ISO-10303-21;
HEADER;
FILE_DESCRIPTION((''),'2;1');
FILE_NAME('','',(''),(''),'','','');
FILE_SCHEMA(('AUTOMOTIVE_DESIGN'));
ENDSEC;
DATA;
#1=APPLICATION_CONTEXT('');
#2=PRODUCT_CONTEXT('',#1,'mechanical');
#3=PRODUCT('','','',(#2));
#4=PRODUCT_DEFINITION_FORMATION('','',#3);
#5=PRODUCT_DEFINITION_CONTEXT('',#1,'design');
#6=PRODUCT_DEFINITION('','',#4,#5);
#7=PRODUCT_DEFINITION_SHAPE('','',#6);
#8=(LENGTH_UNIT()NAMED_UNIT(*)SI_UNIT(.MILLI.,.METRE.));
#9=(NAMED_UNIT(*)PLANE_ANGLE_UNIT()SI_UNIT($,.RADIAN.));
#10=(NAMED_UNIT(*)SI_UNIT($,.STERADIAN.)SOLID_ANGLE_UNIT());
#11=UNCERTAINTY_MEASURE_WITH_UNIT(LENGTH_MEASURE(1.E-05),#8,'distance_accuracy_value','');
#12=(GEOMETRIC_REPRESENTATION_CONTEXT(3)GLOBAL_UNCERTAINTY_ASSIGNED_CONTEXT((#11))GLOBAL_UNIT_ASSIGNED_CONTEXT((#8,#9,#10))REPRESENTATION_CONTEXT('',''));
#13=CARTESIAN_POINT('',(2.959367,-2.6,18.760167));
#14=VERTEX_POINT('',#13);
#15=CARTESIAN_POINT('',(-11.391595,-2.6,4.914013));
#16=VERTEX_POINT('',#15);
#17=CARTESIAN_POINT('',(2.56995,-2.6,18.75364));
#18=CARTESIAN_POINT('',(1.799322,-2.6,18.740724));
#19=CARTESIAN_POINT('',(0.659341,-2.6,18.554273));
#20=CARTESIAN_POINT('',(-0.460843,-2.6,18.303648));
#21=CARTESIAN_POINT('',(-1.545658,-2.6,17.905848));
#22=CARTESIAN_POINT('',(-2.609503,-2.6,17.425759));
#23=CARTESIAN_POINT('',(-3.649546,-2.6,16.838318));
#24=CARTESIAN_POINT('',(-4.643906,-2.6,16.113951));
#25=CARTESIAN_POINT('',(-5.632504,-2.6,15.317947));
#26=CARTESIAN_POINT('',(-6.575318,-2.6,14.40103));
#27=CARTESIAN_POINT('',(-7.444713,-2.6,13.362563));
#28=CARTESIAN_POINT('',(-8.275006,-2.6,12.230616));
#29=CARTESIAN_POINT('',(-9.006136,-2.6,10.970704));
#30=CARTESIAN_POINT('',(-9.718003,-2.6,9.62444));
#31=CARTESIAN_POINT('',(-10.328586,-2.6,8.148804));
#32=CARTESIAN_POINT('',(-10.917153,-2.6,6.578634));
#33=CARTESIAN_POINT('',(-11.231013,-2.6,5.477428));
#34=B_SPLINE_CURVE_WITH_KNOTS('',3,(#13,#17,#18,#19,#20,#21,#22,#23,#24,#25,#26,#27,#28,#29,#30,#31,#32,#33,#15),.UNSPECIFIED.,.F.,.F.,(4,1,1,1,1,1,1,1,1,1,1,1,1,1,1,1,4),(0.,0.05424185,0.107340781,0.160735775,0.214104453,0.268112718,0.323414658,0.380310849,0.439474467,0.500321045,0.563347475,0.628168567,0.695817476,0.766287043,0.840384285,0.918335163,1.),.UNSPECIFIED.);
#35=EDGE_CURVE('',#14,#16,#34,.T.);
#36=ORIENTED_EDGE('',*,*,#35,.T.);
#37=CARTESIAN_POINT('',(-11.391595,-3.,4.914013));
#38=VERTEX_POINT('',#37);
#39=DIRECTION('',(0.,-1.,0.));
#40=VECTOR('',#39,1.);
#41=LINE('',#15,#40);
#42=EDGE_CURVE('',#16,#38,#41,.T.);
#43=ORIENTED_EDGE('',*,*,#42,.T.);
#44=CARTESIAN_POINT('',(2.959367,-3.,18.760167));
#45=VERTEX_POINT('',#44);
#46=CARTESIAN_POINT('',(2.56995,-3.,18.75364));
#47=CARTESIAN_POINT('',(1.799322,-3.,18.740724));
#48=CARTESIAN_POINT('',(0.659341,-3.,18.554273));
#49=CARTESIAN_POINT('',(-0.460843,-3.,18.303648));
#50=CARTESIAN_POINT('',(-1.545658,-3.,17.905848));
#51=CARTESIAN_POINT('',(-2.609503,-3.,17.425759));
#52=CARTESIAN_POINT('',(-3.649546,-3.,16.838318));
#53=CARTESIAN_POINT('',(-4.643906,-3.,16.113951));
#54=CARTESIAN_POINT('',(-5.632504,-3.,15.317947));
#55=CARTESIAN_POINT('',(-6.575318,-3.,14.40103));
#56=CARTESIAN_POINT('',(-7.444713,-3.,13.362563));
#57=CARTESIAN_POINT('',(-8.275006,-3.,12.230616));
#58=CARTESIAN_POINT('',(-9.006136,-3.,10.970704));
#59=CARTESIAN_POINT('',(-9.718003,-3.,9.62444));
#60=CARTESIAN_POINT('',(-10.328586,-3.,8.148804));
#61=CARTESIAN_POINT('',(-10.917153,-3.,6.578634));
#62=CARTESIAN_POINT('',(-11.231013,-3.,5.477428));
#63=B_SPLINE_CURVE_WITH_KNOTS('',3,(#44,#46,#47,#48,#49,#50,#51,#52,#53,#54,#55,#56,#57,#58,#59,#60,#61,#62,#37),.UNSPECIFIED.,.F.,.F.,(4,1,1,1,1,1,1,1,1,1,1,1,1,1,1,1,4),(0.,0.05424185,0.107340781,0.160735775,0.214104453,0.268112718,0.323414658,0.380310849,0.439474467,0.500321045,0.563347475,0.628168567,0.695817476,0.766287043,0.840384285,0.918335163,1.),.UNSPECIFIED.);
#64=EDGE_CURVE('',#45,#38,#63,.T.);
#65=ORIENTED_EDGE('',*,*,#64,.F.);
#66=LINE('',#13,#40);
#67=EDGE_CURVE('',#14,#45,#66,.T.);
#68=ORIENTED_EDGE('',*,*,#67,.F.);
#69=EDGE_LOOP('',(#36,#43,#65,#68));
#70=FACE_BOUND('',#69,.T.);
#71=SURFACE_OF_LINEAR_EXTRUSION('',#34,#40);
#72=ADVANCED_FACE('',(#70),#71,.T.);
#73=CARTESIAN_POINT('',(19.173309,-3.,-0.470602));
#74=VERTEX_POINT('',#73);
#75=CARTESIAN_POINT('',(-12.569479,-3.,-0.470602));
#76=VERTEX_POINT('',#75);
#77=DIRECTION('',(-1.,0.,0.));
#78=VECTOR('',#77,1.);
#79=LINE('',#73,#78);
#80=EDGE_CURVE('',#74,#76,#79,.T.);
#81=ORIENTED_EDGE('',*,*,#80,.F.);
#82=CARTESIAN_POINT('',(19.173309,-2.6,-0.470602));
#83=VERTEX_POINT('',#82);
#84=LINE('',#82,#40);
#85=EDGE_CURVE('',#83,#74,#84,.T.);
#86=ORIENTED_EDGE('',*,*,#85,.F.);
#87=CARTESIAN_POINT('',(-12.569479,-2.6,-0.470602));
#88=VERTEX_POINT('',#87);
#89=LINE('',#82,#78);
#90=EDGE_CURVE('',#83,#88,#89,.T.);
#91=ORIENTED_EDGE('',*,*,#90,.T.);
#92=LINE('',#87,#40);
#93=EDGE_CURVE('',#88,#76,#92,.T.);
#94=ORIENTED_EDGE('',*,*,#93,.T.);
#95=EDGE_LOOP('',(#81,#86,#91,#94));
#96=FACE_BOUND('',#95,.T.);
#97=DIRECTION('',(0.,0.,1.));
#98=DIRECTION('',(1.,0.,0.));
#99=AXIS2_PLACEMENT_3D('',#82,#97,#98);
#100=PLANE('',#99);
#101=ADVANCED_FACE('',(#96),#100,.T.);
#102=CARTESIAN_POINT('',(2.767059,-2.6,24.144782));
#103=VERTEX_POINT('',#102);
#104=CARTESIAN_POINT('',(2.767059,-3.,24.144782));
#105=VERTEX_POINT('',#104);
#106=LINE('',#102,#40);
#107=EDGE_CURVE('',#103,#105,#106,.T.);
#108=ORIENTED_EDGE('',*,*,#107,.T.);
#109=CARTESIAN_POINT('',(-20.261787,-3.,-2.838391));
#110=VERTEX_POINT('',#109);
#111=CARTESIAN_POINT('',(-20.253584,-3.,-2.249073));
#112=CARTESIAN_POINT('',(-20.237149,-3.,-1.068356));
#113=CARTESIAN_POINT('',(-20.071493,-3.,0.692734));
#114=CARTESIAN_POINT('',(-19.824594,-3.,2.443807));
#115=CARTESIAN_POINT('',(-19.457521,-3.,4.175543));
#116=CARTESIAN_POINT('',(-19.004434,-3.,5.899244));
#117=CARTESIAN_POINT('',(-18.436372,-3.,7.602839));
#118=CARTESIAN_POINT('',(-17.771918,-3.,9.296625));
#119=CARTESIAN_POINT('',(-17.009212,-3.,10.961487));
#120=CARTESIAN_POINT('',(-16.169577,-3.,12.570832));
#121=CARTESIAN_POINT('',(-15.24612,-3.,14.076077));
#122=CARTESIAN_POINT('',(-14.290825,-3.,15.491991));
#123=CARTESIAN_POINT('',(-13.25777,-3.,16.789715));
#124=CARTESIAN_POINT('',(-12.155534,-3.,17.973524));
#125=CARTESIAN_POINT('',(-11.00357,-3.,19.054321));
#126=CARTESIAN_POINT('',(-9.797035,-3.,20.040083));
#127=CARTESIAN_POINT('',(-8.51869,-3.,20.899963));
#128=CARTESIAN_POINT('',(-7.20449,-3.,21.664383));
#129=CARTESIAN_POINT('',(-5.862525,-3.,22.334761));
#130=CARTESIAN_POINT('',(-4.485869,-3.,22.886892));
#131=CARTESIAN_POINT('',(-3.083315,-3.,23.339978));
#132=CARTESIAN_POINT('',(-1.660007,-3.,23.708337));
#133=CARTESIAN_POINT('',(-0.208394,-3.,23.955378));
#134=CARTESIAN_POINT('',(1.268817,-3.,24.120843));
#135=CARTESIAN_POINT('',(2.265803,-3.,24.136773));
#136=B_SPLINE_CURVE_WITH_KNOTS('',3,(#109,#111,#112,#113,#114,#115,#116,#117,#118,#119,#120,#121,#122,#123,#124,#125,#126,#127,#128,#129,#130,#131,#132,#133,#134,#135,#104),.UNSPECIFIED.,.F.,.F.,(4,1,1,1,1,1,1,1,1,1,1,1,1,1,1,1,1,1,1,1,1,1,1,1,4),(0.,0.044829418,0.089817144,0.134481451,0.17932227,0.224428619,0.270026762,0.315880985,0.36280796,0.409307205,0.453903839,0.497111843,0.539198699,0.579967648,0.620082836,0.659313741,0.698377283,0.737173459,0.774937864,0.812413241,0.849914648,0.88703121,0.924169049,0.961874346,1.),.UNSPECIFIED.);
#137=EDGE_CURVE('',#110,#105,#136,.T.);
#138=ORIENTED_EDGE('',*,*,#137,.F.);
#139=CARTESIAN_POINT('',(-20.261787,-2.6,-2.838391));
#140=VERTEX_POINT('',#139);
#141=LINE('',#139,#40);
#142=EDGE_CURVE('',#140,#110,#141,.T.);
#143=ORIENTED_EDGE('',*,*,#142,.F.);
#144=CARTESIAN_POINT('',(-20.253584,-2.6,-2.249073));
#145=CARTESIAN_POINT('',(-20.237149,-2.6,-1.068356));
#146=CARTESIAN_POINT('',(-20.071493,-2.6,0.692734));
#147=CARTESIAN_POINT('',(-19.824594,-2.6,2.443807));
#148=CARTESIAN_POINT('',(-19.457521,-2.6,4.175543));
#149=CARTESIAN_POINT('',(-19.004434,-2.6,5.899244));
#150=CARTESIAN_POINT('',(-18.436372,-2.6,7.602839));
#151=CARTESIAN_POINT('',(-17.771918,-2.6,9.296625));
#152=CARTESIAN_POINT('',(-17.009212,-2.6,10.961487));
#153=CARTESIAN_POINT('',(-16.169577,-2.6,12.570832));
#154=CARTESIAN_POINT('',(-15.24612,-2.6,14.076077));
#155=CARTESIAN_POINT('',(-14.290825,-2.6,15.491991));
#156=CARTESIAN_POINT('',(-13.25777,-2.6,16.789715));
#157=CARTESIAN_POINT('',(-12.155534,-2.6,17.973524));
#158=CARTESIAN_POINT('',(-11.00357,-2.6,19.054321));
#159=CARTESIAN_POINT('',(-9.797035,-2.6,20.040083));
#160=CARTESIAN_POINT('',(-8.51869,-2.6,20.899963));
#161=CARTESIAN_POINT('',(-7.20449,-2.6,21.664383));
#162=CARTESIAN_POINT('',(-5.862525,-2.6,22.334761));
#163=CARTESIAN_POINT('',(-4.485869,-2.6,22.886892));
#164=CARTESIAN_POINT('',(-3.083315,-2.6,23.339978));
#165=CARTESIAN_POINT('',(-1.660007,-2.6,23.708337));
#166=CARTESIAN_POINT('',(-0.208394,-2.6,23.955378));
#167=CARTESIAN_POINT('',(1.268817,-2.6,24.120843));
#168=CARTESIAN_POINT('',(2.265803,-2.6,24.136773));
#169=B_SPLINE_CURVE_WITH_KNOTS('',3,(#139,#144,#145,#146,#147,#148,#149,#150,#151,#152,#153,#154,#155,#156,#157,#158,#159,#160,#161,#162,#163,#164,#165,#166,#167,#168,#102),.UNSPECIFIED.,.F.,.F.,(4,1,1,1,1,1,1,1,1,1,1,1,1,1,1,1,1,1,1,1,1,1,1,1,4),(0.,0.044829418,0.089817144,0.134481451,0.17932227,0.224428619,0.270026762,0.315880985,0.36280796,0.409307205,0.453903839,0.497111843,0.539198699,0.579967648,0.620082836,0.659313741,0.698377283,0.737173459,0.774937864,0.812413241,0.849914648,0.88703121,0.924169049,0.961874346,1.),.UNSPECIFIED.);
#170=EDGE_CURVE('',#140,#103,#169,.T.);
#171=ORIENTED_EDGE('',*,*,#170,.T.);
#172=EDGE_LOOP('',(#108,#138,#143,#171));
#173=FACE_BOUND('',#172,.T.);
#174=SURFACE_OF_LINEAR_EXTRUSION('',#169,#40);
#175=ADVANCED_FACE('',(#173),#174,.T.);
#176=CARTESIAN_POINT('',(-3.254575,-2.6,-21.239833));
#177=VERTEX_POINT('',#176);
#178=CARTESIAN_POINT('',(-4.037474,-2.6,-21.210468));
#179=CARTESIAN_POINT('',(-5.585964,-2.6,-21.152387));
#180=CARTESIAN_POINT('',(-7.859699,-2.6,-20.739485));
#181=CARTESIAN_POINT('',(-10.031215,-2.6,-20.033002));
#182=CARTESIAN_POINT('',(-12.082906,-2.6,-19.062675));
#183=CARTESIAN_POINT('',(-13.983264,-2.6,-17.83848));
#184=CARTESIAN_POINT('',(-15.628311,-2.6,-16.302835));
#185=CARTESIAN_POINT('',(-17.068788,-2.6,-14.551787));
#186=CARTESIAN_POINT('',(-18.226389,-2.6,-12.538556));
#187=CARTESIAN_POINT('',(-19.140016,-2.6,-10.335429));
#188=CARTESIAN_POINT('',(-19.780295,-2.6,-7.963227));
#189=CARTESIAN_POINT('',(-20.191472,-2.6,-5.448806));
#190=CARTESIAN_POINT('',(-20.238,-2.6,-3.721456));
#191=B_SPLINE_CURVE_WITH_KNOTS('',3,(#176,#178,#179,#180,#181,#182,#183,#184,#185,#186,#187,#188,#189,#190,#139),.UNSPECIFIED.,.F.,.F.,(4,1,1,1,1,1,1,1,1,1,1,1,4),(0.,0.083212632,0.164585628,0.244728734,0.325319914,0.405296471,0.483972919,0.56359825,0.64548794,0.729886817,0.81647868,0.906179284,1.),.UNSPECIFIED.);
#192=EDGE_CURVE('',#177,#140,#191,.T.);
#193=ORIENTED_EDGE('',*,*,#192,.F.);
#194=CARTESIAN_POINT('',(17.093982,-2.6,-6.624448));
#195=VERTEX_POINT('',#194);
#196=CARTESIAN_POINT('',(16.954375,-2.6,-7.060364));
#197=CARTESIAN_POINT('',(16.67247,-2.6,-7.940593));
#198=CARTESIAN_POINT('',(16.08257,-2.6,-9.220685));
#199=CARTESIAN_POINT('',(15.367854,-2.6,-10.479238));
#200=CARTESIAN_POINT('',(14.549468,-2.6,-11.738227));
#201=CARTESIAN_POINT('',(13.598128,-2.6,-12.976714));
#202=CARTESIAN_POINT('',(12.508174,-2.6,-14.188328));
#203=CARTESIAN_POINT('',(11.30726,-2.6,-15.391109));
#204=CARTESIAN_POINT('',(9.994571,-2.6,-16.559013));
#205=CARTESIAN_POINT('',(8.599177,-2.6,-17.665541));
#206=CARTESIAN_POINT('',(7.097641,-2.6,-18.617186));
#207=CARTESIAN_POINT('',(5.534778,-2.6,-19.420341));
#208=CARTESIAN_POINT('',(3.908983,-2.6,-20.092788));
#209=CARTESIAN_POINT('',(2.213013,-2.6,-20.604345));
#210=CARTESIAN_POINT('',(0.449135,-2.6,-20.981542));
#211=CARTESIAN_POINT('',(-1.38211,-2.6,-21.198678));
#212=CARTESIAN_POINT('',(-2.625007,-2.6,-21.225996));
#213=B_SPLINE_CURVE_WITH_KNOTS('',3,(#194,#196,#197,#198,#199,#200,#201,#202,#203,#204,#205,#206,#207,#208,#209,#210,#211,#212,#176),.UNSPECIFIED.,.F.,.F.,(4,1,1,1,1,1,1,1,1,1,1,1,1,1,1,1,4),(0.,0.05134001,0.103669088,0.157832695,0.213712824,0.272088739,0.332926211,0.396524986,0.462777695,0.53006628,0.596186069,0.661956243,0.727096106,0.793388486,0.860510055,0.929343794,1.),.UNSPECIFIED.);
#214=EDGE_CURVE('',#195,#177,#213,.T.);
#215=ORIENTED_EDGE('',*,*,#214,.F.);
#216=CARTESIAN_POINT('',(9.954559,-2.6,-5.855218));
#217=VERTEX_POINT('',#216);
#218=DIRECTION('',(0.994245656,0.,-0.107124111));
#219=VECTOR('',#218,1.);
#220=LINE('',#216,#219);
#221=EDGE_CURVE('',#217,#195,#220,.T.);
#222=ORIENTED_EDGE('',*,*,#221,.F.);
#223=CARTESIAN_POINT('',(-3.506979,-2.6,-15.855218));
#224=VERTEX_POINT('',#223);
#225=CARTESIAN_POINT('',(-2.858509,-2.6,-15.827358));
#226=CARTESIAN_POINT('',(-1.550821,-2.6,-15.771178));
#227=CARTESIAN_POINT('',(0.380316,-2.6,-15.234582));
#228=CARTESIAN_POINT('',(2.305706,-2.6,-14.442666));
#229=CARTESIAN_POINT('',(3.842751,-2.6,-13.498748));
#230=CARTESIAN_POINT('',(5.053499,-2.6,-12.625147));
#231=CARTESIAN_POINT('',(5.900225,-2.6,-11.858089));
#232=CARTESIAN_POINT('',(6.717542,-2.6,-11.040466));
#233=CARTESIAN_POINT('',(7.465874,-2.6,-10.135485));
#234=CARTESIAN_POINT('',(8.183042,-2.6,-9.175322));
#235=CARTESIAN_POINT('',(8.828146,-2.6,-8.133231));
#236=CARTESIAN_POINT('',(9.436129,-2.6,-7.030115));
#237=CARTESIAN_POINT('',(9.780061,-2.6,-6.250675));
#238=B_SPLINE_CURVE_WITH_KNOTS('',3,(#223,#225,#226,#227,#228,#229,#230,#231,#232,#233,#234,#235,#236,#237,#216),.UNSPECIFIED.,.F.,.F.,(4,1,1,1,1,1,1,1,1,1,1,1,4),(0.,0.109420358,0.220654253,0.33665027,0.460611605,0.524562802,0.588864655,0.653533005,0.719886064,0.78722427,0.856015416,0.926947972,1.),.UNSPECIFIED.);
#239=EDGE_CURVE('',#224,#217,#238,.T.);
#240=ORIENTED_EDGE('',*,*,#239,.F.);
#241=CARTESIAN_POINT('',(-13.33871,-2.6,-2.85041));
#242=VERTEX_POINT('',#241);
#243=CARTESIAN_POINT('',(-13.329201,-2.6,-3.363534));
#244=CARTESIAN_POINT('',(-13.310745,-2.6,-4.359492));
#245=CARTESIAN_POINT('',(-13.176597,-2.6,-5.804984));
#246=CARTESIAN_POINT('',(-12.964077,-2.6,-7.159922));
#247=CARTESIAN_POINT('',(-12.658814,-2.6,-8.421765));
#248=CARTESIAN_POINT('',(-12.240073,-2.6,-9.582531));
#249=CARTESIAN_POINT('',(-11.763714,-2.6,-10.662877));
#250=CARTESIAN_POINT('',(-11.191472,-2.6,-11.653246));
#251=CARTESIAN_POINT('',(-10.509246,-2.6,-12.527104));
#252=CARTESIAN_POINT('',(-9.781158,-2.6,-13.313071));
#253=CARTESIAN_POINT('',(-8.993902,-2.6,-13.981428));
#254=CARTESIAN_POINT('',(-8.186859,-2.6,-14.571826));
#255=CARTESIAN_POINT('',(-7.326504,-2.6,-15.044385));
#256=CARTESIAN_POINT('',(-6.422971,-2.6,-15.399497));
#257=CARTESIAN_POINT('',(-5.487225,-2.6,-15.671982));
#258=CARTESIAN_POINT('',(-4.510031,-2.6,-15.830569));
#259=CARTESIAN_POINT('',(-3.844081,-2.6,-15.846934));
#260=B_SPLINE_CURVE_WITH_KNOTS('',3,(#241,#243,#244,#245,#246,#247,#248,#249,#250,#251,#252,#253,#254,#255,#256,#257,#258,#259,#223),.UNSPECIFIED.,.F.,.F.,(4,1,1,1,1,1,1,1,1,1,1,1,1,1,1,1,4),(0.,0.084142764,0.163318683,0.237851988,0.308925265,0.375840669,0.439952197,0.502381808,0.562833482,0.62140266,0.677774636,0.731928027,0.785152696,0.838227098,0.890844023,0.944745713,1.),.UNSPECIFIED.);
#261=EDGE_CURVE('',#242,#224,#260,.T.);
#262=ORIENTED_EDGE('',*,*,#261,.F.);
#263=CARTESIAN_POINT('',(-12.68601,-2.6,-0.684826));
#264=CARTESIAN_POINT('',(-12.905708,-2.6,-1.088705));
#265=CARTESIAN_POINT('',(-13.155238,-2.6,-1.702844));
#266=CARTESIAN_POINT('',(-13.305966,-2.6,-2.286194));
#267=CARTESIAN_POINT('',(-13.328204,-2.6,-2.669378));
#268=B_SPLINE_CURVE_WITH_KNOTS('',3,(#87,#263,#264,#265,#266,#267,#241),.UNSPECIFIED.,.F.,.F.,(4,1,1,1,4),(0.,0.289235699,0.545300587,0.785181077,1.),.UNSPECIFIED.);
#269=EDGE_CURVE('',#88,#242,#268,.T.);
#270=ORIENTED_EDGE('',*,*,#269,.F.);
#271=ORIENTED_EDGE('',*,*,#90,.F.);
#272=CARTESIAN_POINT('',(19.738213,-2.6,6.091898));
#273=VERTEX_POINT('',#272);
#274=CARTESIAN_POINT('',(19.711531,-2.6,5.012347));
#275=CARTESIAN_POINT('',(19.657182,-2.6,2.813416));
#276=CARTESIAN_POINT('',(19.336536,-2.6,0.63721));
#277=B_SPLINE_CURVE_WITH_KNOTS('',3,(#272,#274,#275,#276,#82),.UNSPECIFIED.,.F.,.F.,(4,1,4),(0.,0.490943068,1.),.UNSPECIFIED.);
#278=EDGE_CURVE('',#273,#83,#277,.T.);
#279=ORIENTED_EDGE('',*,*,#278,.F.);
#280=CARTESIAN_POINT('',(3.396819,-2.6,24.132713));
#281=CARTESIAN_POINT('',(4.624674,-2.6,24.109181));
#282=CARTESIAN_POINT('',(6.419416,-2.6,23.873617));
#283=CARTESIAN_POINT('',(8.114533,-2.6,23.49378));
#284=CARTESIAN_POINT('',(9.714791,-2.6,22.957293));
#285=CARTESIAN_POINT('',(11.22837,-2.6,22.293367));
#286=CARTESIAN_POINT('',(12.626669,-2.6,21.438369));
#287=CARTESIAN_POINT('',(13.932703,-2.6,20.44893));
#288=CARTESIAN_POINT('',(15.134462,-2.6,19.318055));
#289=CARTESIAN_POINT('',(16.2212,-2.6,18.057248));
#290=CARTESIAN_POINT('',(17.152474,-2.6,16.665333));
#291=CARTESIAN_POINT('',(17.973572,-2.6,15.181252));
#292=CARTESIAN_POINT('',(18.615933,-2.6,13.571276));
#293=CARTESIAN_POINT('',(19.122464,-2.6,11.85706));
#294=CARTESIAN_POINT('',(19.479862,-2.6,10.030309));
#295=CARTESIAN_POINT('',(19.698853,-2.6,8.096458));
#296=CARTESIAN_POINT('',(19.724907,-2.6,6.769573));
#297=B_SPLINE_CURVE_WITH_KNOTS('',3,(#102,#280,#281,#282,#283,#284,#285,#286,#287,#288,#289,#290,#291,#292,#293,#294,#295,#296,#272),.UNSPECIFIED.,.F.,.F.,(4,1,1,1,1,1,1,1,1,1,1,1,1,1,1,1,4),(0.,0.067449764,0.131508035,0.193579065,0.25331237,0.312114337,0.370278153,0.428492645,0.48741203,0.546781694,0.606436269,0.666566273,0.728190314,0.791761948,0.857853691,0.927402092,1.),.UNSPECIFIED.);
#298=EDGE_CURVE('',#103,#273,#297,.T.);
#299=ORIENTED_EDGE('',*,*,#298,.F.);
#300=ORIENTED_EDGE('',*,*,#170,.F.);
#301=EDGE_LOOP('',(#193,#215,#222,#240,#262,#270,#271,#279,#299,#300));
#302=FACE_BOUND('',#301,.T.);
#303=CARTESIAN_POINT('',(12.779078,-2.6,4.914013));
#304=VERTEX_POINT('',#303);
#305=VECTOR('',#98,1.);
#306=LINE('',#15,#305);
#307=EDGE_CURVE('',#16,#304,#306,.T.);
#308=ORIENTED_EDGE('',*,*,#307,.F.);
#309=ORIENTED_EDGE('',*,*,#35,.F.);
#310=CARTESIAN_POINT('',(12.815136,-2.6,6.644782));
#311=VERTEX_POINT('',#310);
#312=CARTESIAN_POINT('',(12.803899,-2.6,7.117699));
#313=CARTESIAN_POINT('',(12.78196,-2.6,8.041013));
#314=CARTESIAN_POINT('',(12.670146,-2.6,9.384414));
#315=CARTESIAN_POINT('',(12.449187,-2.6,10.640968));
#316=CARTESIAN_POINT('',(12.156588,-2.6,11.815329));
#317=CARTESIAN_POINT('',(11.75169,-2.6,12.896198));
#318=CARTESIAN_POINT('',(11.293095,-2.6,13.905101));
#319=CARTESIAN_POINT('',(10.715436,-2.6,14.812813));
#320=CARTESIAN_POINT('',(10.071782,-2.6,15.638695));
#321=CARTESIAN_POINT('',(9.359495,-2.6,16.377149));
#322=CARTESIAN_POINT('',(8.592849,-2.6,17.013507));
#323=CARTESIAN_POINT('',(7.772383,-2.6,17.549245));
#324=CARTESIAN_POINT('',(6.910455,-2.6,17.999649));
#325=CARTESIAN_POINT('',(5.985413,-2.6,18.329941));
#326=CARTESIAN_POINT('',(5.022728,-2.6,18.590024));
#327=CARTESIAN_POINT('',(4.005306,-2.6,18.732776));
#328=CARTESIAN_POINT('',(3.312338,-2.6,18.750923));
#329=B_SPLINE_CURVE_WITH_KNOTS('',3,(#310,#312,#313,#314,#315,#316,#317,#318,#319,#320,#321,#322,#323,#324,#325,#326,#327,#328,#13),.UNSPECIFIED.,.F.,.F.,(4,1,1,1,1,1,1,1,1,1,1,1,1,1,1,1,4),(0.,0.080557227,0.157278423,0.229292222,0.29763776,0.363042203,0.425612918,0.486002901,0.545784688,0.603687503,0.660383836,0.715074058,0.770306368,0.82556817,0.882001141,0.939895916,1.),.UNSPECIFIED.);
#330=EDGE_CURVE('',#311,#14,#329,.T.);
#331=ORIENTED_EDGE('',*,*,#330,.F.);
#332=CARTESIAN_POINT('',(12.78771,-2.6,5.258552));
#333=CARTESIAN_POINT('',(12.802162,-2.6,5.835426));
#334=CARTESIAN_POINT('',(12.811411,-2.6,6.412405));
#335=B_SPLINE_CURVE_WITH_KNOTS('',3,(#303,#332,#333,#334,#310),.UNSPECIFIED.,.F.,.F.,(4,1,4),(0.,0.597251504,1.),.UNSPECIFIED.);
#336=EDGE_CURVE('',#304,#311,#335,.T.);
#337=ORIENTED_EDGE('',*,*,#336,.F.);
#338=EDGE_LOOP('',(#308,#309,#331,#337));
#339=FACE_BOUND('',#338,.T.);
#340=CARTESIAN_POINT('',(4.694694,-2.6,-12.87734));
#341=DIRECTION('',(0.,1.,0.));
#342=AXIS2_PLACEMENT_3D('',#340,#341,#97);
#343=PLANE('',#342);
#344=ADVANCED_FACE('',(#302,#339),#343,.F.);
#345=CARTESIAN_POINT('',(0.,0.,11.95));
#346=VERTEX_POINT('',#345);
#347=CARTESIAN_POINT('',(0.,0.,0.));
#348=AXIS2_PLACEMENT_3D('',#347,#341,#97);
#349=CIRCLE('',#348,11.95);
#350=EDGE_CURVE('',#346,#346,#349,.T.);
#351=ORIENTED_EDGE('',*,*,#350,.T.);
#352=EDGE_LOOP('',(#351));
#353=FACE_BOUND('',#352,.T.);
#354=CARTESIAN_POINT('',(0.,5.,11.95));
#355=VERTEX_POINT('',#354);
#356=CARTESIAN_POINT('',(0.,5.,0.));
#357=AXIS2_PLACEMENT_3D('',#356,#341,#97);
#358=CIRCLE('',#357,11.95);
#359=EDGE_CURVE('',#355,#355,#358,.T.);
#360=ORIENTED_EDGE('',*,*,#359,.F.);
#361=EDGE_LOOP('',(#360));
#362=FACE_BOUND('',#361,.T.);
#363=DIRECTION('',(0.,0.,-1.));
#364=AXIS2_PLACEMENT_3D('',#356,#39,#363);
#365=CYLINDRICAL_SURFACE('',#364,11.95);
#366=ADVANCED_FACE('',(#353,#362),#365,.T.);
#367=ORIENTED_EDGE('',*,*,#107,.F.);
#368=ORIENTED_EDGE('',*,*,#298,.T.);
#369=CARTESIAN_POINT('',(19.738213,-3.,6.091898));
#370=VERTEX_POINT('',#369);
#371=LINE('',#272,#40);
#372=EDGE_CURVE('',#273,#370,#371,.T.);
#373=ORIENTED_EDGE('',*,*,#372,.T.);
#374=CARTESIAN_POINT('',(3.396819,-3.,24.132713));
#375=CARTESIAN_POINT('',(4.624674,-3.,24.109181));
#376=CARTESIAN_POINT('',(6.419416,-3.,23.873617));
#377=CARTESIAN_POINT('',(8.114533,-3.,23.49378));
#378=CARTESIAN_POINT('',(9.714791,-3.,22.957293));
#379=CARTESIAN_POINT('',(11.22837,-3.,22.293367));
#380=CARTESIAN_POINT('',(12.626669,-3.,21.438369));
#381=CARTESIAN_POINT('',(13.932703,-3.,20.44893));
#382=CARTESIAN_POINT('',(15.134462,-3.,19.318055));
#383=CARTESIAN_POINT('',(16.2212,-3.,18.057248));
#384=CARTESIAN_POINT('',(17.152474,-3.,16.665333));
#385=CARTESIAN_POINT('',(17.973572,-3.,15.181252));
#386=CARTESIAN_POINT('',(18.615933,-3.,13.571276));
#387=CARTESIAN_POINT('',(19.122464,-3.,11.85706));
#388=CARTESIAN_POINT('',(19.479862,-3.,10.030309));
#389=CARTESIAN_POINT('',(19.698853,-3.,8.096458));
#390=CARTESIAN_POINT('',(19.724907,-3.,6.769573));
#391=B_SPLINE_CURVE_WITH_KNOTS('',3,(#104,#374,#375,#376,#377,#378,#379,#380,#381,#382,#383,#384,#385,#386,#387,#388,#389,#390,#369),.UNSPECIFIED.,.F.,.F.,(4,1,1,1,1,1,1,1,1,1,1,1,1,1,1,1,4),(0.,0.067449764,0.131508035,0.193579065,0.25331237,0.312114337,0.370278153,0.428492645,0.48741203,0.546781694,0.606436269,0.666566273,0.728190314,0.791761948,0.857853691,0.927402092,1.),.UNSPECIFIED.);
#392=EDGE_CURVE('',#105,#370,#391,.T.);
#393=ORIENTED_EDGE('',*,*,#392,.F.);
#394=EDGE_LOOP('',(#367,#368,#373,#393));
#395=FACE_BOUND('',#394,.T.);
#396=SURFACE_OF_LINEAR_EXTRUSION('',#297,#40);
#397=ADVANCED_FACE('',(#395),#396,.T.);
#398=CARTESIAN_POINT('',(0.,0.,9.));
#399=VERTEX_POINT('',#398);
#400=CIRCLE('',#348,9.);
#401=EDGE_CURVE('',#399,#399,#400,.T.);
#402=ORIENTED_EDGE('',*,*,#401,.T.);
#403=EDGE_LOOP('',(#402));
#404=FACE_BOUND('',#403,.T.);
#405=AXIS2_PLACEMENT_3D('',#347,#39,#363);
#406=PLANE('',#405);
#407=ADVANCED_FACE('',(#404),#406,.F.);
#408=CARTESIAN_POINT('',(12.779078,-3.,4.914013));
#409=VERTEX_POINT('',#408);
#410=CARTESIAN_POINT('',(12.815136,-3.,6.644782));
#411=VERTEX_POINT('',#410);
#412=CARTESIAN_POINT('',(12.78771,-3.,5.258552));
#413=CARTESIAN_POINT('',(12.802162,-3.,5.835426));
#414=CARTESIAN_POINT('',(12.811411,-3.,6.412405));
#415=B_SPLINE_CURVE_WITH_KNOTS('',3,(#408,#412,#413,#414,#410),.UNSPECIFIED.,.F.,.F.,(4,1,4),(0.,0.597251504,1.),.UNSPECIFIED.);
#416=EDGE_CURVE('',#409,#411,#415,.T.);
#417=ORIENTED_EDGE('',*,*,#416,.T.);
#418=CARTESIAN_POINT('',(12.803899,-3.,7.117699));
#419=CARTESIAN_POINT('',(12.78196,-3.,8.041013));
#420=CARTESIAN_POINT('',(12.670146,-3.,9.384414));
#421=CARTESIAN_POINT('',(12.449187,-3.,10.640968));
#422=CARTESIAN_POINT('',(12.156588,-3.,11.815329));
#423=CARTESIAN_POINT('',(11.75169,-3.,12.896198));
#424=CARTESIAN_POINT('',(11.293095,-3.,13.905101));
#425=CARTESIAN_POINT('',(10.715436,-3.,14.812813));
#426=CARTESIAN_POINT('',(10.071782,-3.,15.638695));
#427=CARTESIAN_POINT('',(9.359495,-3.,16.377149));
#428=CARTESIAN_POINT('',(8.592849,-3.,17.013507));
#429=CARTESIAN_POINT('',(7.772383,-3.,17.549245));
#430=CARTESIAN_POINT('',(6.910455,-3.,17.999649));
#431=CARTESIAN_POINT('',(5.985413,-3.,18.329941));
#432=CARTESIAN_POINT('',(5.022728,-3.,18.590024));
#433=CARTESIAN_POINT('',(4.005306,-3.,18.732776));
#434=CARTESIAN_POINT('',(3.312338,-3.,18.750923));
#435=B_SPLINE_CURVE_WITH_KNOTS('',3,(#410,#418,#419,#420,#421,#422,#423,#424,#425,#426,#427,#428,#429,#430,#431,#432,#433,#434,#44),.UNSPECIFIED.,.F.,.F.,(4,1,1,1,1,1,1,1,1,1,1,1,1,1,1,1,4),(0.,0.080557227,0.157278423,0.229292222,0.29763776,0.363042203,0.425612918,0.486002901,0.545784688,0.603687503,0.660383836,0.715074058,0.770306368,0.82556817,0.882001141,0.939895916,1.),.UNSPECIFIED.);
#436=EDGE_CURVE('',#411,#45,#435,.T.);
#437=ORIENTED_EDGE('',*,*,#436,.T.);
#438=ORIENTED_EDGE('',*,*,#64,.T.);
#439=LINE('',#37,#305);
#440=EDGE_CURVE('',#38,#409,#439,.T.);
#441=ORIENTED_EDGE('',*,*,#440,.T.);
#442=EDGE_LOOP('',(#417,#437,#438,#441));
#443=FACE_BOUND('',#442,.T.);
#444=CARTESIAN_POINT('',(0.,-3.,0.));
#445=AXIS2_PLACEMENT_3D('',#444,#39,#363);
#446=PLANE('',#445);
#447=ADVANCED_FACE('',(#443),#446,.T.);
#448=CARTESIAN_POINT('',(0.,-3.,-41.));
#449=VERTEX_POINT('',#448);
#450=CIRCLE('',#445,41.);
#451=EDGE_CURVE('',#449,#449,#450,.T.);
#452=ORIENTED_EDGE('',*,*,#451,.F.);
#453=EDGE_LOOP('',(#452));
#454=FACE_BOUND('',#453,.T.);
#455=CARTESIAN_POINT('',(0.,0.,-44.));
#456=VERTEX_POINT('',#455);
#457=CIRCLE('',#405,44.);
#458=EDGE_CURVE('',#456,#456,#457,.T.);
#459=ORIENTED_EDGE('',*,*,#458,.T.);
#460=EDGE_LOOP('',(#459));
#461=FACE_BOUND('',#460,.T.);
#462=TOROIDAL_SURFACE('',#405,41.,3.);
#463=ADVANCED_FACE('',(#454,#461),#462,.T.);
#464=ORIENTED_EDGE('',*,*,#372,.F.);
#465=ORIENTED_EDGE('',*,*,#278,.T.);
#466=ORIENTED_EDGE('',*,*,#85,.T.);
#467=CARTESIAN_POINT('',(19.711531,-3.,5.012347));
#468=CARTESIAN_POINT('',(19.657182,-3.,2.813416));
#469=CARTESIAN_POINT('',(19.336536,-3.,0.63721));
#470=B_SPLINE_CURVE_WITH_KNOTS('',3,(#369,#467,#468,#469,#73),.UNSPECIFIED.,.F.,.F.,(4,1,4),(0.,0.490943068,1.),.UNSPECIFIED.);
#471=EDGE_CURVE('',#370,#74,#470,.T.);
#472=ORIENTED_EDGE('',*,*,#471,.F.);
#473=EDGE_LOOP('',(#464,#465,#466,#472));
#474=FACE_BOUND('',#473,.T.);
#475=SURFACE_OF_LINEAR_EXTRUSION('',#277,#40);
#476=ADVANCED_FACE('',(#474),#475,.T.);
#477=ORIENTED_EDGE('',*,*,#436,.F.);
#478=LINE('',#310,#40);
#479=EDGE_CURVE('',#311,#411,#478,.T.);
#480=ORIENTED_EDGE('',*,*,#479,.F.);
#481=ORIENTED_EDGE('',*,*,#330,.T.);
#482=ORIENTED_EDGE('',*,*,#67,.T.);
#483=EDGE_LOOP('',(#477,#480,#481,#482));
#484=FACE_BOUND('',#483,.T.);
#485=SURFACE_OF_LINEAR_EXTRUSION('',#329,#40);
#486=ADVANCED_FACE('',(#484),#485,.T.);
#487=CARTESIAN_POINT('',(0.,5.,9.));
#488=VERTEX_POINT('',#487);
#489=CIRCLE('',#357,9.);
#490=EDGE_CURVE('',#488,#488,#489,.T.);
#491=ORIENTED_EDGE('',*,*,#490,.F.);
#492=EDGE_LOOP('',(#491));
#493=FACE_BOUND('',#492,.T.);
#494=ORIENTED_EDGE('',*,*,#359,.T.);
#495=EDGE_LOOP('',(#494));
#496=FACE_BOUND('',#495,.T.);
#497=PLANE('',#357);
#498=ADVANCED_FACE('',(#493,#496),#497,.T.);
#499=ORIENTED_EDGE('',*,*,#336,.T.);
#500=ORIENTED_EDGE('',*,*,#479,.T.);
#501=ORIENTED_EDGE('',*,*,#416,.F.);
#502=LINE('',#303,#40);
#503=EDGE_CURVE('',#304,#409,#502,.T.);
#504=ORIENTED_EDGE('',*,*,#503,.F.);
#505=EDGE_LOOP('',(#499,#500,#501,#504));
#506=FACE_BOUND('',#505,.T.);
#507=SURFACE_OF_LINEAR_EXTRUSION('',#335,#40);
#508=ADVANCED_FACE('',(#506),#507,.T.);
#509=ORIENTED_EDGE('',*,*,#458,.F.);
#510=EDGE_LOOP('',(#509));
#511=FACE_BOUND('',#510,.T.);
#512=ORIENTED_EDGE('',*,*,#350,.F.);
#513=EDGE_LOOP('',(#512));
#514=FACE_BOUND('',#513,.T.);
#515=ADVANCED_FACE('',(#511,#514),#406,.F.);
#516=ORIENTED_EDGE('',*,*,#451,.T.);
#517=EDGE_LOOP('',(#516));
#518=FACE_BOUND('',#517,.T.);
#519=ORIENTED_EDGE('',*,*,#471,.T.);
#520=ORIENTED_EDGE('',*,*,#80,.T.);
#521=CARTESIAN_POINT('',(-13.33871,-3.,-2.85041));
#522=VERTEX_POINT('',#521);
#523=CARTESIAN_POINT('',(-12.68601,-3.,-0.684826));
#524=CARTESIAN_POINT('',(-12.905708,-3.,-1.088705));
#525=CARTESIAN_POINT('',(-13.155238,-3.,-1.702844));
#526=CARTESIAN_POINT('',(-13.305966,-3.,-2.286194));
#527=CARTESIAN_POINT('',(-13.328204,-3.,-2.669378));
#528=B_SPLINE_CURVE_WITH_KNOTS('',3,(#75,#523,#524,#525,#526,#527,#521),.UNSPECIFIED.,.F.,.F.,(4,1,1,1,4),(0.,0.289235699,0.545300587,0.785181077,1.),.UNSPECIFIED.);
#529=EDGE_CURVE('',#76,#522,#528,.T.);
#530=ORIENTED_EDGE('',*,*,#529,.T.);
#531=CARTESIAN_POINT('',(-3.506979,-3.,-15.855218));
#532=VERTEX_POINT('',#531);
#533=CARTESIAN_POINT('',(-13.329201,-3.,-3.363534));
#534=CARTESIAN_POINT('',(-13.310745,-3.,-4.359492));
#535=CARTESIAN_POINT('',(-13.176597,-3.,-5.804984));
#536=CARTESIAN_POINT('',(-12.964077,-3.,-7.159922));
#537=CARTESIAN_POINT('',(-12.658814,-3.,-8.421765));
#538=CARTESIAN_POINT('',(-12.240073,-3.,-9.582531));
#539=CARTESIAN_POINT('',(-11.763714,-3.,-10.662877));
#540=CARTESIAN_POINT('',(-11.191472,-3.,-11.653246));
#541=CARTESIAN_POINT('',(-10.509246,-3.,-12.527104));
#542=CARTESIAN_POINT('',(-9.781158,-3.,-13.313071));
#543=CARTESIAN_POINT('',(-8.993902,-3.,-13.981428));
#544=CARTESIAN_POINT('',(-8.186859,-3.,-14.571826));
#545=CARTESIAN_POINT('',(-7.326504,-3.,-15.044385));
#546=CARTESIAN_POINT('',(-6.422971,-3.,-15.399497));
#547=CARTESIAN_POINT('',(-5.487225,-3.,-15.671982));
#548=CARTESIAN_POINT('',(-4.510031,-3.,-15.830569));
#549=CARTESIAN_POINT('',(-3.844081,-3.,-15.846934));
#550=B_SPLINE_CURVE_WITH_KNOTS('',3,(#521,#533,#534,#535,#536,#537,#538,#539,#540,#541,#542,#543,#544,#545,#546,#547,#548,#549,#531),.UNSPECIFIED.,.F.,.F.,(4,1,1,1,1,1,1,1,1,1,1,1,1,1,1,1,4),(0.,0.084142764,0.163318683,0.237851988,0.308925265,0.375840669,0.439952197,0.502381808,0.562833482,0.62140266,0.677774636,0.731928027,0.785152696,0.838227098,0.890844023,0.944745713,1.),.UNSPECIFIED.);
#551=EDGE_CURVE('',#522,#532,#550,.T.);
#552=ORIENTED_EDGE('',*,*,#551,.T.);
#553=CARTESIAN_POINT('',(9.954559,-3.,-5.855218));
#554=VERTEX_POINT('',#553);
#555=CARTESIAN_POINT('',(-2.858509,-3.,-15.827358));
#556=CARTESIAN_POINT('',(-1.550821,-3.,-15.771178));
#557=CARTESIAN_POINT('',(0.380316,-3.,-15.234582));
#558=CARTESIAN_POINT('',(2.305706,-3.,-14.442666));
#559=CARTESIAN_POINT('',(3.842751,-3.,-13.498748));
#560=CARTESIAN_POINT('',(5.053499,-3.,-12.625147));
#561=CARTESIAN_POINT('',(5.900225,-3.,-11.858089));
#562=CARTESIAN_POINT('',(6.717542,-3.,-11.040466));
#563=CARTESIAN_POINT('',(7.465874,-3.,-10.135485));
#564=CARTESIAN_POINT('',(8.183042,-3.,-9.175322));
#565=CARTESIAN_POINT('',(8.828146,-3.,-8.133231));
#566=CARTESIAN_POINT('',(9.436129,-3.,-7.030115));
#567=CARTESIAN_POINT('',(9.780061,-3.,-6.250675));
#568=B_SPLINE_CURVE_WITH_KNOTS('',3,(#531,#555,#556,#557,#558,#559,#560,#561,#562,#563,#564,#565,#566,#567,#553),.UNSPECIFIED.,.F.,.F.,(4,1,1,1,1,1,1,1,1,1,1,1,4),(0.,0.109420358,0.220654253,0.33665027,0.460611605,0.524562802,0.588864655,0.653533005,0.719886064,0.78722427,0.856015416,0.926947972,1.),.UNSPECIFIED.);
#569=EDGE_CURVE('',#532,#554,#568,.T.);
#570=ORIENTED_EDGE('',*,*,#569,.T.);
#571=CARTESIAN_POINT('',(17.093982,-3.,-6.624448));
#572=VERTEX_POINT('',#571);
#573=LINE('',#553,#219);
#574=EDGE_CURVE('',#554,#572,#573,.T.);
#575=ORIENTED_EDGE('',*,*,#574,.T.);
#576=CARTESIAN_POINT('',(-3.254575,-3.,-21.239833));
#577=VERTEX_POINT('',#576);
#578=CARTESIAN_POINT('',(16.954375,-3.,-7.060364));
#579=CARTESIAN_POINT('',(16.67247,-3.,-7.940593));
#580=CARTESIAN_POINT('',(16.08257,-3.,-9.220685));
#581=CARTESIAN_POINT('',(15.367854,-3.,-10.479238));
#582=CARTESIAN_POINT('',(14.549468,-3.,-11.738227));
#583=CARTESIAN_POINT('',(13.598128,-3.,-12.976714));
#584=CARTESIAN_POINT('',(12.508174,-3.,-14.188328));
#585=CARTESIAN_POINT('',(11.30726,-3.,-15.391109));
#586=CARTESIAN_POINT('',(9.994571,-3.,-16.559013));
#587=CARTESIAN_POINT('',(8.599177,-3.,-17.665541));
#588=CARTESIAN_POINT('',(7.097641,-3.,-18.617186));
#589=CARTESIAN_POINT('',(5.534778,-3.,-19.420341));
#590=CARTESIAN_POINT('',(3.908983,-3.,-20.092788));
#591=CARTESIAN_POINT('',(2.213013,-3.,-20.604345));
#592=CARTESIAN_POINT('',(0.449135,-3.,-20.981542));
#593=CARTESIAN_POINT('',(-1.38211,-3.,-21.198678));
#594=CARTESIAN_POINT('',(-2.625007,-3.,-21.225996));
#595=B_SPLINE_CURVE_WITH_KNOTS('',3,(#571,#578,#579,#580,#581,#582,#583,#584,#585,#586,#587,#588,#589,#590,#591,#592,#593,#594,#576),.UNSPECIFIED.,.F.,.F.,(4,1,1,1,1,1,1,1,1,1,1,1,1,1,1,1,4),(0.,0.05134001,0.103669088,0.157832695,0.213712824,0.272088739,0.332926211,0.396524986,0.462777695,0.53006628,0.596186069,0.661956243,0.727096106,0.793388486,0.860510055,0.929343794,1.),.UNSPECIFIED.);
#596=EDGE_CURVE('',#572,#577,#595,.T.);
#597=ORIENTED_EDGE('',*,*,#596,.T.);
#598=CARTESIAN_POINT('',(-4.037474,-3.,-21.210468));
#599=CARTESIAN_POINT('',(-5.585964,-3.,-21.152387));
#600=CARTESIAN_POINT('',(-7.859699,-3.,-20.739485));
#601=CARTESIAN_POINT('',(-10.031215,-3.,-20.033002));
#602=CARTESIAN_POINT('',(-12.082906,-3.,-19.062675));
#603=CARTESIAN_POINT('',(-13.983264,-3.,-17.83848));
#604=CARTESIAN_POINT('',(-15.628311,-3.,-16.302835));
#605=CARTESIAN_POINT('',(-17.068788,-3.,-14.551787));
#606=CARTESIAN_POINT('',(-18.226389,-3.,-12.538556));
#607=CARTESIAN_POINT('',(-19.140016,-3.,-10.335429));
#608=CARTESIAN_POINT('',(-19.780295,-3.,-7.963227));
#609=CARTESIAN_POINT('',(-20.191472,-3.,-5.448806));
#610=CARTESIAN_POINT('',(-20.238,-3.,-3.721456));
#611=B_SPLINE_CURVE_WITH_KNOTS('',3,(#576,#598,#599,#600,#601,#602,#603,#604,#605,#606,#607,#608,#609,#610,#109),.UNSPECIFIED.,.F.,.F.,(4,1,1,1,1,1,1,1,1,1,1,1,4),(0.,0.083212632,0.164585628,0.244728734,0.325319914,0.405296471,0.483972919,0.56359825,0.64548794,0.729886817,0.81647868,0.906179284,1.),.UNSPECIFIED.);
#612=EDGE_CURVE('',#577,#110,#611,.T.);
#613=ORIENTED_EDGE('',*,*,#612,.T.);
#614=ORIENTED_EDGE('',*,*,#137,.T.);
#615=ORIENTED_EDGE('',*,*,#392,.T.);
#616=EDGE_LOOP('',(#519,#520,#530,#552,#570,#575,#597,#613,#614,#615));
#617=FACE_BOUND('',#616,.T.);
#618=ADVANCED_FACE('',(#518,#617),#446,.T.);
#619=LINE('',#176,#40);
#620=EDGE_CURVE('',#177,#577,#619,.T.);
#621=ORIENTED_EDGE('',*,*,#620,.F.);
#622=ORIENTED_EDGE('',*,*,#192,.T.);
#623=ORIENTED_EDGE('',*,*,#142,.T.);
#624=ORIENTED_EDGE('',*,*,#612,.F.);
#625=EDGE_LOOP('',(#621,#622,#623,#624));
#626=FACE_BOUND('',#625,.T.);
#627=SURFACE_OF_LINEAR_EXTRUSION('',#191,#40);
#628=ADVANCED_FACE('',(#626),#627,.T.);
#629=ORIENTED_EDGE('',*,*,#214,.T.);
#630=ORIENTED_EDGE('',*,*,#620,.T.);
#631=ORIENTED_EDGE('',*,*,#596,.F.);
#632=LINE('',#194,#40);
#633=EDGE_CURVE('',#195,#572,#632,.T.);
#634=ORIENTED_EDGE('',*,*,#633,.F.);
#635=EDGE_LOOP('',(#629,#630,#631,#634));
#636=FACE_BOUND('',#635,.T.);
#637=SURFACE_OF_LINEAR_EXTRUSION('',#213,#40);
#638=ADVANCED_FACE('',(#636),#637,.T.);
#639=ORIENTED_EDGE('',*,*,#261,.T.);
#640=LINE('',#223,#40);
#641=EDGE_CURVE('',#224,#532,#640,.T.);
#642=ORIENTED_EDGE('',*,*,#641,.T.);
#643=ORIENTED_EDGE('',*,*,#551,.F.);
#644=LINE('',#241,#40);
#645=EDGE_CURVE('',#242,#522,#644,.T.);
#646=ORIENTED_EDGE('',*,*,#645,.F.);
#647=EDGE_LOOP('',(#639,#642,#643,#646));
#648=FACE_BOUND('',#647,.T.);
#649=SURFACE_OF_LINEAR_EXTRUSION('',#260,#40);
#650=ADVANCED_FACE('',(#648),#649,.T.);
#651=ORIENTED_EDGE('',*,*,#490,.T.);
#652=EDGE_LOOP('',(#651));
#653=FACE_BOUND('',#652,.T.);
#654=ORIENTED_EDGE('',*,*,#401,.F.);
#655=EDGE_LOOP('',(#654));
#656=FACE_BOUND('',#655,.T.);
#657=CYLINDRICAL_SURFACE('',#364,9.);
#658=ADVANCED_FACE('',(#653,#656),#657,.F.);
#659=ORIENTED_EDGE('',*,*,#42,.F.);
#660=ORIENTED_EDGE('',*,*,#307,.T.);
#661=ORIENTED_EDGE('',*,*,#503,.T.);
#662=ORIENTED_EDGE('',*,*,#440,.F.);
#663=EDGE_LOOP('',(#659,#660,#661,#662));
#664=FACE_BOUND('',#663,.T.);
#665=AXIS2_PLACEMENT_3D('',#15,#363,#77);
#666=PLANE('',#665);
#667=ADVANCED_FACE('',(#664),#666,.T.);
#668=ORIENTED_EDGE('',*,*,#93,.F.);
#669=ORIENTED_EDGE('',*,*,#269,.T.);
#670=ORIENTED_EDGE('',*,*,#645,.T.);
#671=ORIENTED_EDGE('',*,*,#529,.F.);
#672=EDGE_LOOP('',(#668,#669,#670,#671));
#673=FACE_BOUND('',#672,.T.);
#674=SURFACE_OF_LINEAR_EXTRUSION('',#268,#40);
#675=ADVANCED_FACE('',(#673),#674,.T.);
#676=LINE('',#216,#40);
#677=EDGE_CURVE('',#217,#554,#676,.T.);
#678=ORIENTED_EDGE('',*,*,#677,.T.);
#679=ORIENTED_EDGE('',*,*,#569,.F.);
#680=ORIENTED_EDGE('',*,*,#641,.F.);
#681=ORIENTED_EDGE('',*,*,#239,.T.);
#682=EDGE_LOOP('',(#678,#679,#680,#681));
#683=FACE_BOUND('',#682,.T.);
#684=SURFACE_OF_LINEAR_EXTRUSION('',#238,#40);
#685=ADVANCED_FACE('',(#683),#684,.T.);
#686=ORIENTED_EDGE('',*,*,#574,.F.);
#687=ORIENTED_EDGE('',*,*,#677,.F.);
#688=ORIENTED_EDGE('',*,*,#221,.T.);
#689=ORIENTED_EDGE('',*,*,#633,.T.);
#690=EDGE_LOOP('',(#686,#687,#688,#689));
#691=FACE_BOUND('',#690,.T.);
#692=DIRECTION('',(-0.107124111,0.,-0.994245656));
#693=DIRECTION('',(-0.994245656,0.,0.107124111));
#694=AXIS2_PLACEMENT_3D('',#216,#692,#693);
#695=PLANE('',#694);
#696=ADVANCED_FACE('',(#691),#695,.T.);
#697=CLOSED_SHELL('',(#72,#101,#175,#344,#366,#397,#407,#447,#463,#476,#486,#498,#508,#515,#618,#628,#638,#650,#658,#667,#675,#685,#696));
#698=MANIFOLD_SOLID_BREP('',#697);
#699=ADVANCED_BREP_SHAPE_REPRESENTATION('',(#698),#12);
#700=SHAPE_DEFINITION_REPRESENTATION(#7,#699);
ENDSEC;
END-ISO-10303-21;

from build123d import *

# Parameters (mm, degrees)
SKETCH_1_R          = 11.95
SKETCH_1_R_2        = 9
EXTRUDE_1_DEPTH     = 5
SKETCH_2_R          = 44
EXTRUDE_2_DEPTH     = 3
FILLET_1_R          = 3
CUT_EXTRUDE_1_DEPTH = 0.4


with BuildPart() as part:
    # Эскиз1 → Бобышка-Вытянуть1 (new body)
    with BuildSketch(Plane(origin=(0, 0, 0), x_dir=(1, 0, 0), z_dir=(0, 1, 0))):
        with Locations(Location((0, 0, 0), (0, 0, 270))):
            Circle(SKETCH_1_R)
        with Locations(Location((0, 0, 0), (0, 0, 270))):
            Circle(SKETCH_1_R_2, mode=Mode.SUBTRACT)
    extrude(amount=EXTRUDE_1_DEPTH)

    # Эскиз2 → Бобышка-Вытянуть2 (add)
    with BuildSketch(Plane.XZ):
        with Locations(Location((0, 0, 0), (0, 0, 270))):
            Circle(SKETCH_2_R)
    extrude(amount=EXTRUDE_2_DEPTH)

    # Скругление1
    fillet_1_edges = [part.edges().sort_by_distance(p)[0] for p in [
        (0, -3, 44),
    ]]
    fillet(fillet_1_edges, radius=FILLET_1_R - 0.0001)  # a hair under: the kernel refuses the full size

    # Эскиз3 → Вырез-Вытянуть1 (cut)
    with BuildSketch(Plane.XZ.offset(3)):
        with BuildLine():
            Line((9.954559223, -5.855217729), (17.0939823, -6.624448498))
            add(Edge.make_bspline(
                [(17.0939823, -6.624448498), (16.954374573, -7.060364037), (16.67246957, -7.940593052), (16.082570182, -9.220685029), (15.367854468, -10.479237732), (14.549468275, -11.738227045), (13.598128393, -12.976714181), (12.508174471, -14.188327514), (11.307260102, -15.391109491), (9.994571436, -16.559013497), (8.599176625, -17.665541174), (7.097641414, -18.617186253), (5.53477836, -19.420340753), (3.908983058, -20.092788159), (2.213013482, -20.604345047), (0.449135236, -20.981542054), (-1.382110347, -21.198678471), (-2.625007466, -21.22599593), (-3.254575393, -21.239833113)],
                knots=[0, 0, 0, 0, 0.821440156, 1.658705401, 2.525323128, 3.419405186, 4.353419828, 5.32681938, 6.344399772, 7.404443113, 8.481060479, 9.538977106, 10.591299887, 11.633537695, 12.694215778, 13.768160887, 14.869500701, 16, 16, 16, 16], degree=3))
            add(Edge.make_bspline(
                [(-3.254575393, -21.239833113), (-4.037474252, -21.210468003), (-5.585963904, -21.152386976), (-7.859698842, -20.739484748), (-10.031214503, -20.033002378), (-12.082905697, -19.06267493), (-13.983263507, -17.838479622), (-15.628310659, -16.302835445), (-17.068788245, -14.551786811), (-18.226388665, -12.538555624), (-19.140015512, -10.335429034), (-19.780294703, -7.963227163), (-20.191471581, -5.448805692), (-20.238000287, -3.721455618), (-20.261786931, -2.838390806)],
                knots=[0, 0, 0, 0, 0.998551589, 1.975027533, 2.936744805, 3.903838964, 4.863557655, 5.807675034, 6.763178998, 7.745855275, 8.758641806, 9.797744155, 10.874151411, 12, 12, 12, 12], degree=3))
            add(Edge.make_bspline(
                [(-20.261786931, -2.838390806), (-20.253583862, -2.249072754), (-20.237148757, -1.068355571), (-20.071493014, 0.692734171), (-19.824593654, 2.443807008), (-19.457520681, 4.175543157), (-19.00443369, 5.89924412), (-18.436371871, 7.60283942), (-17.771918435, 9.296625216), (-17.009212067, 10.961487215), (-16.169576767, 12.570831605), (-15.246119859, 14.076076683), (-14.290825473, 15.491991281), (-13.257769645, 16.789715189), (-12.155533796, 17.973523587), (-11.00356969, 19.054320976), (-9.797035153, 20.040082521), (-8.518689542, 20.899962793), (-7.204489818, 21.664382583), (-5.862524589, 22.334760878), (-4.485868659, 22.886891815), (-3.083314583, 23.339978114), (-1.660006861, 23.708336607), (-0.208394214, 23.955377865), (1.268817222, 24.120842874), (2.265803014, 24.136773037), (2.767059223, 24.144782271)],
                knots=[0, 0, 0, 0, 1.075906032, 2.155611451, 3.227554832, 4.30373447, 5.38628686, 6.480642286, 7.581143633, 8.707391042, 9.82337293, 10.893692135, 11.930684225, 12.940768785, 13.919223559, 14.881988069, 15.823529777, 16.761054785, 17.692163021, 18.598508727, 19.497917784, 20.397951545, 21.288749041, 22.180057169, 23.084984307, 24, 24, 24, 24], degree=3))
            add(Edge.make_bspline(
                [(2.767059223, 24.144782271), (3.396819449, 24.13271298), (4.624674455, 24.109181262), (6.419415658, 23.873617188), (8.114533072, 23.493780483), (9.71479097, 22.957293415), (11.228369978, 22.293366902), (12.626669407, 21.438368521), (13.932702912, 20.448929523), (15.134462193, 19.318054618), (16.221199996, 18.057248477), (17.152473609, 16.665333162), (17.973572218, 15.181251724), (18.615932964, 13.571276078), (19.12246379, 11.857059969), (19.479861685, 10.030309351), (19.69885311, 8.096457894), (19.72490677, 6.769573083), (19.738213069, 6.091897656)],
                knots=[0, 0, 0, 0, 1.079196217, 2.10412856, 3.097265039, 4.052997914, 4.993829394, 5.924450447, 6.855882321, 7.798592485, 8.748507102, 9.702980304, 10.665060364, 11.651045023, 12.668191174, 13.725659051, 14.838433479, 16, 16, 16, 16], degree=3))
            add(Edge.make_bspline(
                [(19.738213069, 6.091897656), (19.711530906, 5.012347464), (19.657182115, 2.813415932), (19.336536232, 0.637210246), (19.173309223, -0.470602344)],
                knots=[0, 0, 0, 0, 0.981886135, 2, 2, 2, 2], degree=3))
            Line((19.173309223, -0.470602344), (-12.569479239, -0.470602344))
            add(Edge.make_bspline(
                [(-12.569479239, -0.470602344), (-12.686010265, -0.684825825), (-12.905708031, -1.088704703), (-13.155238164, -1.702843602), (-13.305966259, -2.286193686), (-13.328203982, -2.669377879), (-13.338710008, -2.850410037)],
                knots=[0, 0, 0, 0, 1.156942796, 2.181202349, 3.140724307, 4, 4, 4, 4], degree=3))
            add(Edge.make_bspline(
                [(-13.338710008, -2.850410037), (-13.329201362, -3.363533664), (-13.310745354, -4.359491854), (-13.176596758, -5.804983514), (-12.964076928, -7.159922166), (-12.658814238, -8.421765438), (-12.240072534, -9.58253052), (-11.763714111, -10.662876848), (-11.191471954, -11.653246376), (-10.509245809, -12.527103519), (-9.781157621, -13.313071224), (-8.993901514, -13.981427574), (-8.186858669, -14.571826363), (-7.326503521, -15.044385035), (-6.422970918, -15.399496847), (-5.487224957, -15.67198157), (-4.510031445, -15.830569123), (-3.844080664, -15.846933933), (-3.506979239, -15.855217729)],
                knots=[0, 0, 0, 0, 1.346284225, 2.613098929, 3.805631801, 4.942804233, 6.013450698, 7.039235158, 8.038108926, 9.00533571, 9.942442562, 10.84439418, 11.710848438, 12.56244313, 13.41163356, 14.253504373, 15.115931414, 16, 16, 16, 16], degree=3))
            add(Edge.make_bspline(
                [(-3.506979239, -15.855217729), (-2.858509214, -15.827358464), (-1.550821401, -15.771178193), (0.380315515, -15.234581986), (2.305705802, -14.442665665), (3.842751413, -13.498748209), (5.053499235, -12.625146746), (5.900225032, -11.858088786), (6.717542295, -11.040465602), (7.465873942, -10.135485129), (8.183042091, -9.175321866), (8.828146274, -8.133230752), (9.436128603, -7.030114624), (9.780061437, -6.250674515), (9.954559223, -5.855217729)],
                knots=[0, 0, 0, 0, 1.313044299, 2.647851039, 4.03980324, 5.527339259, 6.29475363, 7.066375866, 7.842396062, 8.63863277, 9.446691243, 10.272184996, 11.123375662, 12, 12, 12, 12], degree=3))
        make_face()
        with BuildLine():
            Line((-11.391594623, 4.91401304), (12.779078454, 4.91401304))
            add(Edge.make_bspline(
                [(12.779078454, 4.91401304), (12.787709895, 5.258551796), (12.802161832, 5.835425615), (12.811411041, 6.41240478), (12.815136146, 6.644782271)],
                knots=[0, 0, 0, 0, 1.194503009, 2, 2, 2, 2], degree=3))
            add(Edge.make_bspline(
                [(12.815136146, 6.644782271), (12.803898897, 7.117699119), (12.781959502, 8.041013127), (12.670145666, 9.384414471), (12.449186915, 10.640968329), (12.156588483, 11.815328923), (11.751690213, 12.896198212), (11.293094857, 13.905101329), (10.71543559, 14.812813231), (10.071782115, 15.638694593), (9.359494816, 16.377148538), (8.592848863, 17.01350722), (7.772383486, 17.549245443), (6.910455487, 17.999648964), (5.985412837, 18.329941166), (5.022728372, 18.590023931), (4.005305708, 18.732775986), (3.312338023, 18.750923328), (2.959366915, 18.760166887)],
                knots=[0, 0, 0, 0, 1.288915635, 2.516454775, 3.668675548, 4.762204166, 5.808675246, 6.809806692, 7.776046417, 8.732555008, 9.659000055, 10.566141369, 11.441184925, 12.324901883, 13.209090714, 14.112018255, 15.038334656, 16, 16, 16, 16], degree=3))
            add(Edge.make_bspline(
                [(2.959366915, 18.760166887), (2.569950261, 18.753640128), (1.799322271, 18.740724135), (0.659341059, 18.554273421), (-0.460843427, 18.303647562), (-1.545658439, 17.905847871), (-2.609502644, 17.425759439), (-3.649545731, 16.838318089), (-4.643906234, 16.113950662), (-5.632504092, 15.317947338), (-6.575317711, 14.401029882), (-7.44471318, 13.362562561), (-8.275005659, 12.230615841), (-9.006135858, 10.970703852), (-9.718002889, 9.624439846), (-10.328585973, 8.148804352), (-10.917153248, 6.578634088), (-11.231013188, 5.477427724), (-11.391594623, 4.91401304)],
                knots=[0, 0, 0, 0, 0.867869597, 1.717452491, 2.571772394, 3.425671253, 4.289803496, 5.174634535, 6.084973587, 7.031591473, 8.005136717, 9.013559597, 10.050697067, 11.133079613, 12.260592687, 13.446148552, 14.693362615, 16, 16, 16, 16], degree=3))
        make_face(mode=Mode.SUBTRACT)
    extrude(amount=-CUT_EXTRUDE_1_DEPTH, mode=Mode.SUBTRACT)


solid = part.part
